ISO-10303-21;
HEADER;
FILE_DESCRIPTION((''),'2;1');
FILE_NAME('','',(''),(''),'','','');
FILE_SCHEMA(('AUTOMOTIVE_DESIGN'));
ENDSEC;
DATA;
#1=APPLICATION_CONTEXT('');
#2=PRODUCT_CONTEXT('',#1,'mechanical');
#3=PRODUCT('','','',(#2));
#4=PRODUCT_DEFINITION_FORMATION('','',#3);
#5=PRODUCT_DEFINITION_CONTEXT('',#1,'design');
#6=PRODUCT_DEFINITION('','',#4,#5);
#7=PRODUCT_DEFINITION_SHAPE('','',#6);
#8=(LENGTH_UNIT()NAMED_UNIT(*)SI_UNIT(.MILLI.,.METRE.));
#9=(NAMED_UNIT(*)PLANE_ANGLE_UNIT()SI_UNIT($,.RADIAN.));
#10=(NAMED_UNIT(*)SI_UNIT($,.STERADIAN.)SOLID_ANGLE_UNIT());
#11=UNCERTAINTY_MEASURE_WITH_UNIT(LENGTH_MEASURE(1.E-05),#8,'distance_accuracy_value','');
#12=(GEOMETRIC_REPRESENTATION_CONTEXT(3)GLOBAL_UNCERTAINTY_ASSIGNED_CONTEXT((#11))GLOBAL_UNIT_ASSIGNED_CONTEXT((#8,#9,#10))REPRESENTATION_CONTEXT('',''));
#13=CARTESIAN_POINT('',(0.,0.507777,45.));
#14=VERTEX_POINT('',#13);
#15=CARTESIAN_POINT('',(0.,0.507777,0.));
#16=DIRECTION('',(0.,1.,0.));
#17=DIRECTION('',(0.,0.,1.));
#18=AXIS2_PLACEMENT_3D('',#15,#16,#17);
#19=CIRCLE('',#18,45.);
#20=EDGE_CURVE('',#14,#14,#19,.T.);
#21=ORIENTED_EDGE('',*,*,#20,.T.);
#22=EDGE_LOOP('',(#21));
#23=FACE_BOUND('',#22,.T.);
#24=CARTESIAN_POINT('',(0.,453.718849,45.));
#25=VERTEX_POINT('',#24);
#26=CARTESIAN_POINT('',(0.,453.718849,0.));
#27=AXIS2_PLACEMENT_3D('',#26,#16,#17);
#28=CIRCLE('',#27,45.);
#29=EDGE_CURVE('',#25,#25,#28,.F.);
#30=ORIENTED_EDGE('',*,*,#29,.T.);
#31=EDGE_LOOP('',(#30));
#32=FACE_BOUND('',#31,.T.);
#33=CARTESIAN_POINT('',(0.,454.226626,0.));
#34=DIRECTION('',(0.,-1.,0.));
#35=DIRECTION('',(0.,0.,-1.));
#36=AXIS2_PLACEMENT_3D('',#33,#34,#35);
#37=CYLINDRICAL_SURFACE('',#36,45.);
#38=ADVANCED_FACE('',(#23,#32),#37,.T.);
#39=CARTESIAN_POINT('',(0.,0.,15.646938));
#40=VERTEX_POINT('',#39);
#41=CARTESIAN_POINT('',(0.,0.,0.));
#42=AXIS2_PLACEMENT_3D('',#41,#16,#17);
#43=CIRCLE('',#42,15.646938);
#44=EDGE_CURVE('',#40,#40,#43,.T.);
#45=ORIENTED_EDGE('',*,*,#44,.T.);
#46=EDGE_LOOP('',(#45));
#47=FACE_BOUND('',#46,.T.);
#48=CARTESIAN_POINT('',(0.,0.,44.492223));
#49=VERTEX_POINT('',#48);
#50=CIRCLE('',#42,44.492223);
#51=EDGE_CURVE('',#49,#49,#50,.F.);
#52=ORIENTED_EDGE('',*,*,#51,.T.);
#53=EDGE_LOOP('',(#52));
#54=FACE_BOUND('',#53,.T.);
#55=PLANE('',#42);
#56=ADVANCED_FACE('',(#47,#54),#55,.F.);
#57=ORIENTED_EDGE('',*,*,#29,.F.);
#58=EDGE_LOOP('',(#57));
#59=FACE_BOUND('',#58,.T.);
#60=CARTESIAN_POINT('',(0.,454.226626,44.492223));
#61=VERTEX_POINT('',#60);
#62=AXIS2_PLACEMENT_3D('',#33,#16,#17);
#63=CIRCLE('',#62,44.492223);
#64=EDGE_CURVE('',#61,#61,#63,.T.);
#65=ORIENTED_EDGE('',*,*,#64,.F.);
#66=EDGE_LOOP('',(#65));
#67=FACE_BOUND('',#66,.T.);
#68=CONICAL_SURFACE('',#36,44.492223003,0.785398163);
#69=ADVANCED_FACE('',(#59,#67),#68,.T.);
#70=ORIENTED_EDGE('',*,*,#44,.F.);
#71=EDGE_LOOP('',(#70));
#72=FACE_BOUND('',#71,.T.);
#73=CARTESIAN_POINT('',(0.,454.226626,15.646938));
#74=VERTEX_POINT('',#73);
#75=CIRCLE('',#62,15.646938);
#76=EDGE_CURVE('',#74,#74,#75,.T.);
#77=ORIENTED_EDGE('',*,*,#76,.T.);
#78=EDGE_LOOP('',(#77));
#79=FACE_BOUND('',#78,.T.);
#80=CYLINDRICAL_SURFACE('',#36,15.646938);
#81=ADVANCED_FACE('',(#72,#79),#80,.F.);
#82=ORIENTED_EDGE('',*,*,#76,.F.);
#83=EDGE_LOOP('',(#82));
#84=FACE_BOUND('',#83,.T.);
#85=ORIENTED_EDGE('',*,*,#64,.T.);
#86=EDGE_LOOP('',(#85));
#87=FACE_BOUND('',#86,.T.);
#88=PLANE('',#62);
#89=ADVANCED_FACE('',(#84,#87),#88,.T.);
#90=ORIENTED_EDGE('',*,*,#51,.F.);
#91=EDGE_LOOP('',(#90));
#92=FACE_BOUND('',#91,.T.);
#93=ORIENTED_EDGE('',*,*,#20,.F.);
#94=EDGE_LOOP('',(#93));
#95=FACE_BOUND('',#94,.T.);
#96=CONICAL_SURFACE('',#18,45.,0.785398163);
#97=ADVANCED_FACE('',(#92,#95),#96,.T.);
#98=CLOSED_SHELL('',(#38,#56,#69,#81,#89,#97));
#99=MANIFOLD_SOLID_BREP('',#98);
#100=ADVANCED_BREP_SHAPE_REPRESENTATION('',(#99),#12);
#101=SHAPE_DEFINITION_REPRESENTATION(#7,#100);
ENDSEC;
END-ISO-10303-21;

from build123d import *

# Parameters (mm, degrees)
SKETCH1_R           = 45
BOSS_EXTRUDE1_DEPTH = 454.226625745
SKETCH2_R           = 15.646938019
CUT_EXTRUDE1_DEPTH  = 459.663087174
CHAMFER1_SIZE       = 0.507776997


with BuildPart() as part:
    # Sketch1 → Boss-Extrude1 (new body)
    with BuildSketch(Plane(origin=(0, 0, 0), x_dir=(1, 0, 0), z_dir=(0, 1, 0))):
        Circle(SKETCH1_R)
    extrude(amount=BOSS_EXTRUDE1_DEPTH)

    # Sketch2 → Cut-Extrude1 (cut, through all)
    with BuildSketch(Plane(origin=(0, 0, 0), x_dir=(1, 0, 0), z_dir=(0, 1, 0))):
        Circle(SKETCH2_R)
    extrude(amount=CUT_EXTRUDE1_DEPTH, mode=Mode.SUBTRACT)

    # Chamfer1
    chamfer1_edges = [part.edges().sort_by_distance(p)[0] for p in [
        (-45, 454.226625745, 0),
        (-45, 0, 0),
    ]]
    chamfer(chamfer1_edges, length=CHAMFER1_SIZE)


solid = part.part
